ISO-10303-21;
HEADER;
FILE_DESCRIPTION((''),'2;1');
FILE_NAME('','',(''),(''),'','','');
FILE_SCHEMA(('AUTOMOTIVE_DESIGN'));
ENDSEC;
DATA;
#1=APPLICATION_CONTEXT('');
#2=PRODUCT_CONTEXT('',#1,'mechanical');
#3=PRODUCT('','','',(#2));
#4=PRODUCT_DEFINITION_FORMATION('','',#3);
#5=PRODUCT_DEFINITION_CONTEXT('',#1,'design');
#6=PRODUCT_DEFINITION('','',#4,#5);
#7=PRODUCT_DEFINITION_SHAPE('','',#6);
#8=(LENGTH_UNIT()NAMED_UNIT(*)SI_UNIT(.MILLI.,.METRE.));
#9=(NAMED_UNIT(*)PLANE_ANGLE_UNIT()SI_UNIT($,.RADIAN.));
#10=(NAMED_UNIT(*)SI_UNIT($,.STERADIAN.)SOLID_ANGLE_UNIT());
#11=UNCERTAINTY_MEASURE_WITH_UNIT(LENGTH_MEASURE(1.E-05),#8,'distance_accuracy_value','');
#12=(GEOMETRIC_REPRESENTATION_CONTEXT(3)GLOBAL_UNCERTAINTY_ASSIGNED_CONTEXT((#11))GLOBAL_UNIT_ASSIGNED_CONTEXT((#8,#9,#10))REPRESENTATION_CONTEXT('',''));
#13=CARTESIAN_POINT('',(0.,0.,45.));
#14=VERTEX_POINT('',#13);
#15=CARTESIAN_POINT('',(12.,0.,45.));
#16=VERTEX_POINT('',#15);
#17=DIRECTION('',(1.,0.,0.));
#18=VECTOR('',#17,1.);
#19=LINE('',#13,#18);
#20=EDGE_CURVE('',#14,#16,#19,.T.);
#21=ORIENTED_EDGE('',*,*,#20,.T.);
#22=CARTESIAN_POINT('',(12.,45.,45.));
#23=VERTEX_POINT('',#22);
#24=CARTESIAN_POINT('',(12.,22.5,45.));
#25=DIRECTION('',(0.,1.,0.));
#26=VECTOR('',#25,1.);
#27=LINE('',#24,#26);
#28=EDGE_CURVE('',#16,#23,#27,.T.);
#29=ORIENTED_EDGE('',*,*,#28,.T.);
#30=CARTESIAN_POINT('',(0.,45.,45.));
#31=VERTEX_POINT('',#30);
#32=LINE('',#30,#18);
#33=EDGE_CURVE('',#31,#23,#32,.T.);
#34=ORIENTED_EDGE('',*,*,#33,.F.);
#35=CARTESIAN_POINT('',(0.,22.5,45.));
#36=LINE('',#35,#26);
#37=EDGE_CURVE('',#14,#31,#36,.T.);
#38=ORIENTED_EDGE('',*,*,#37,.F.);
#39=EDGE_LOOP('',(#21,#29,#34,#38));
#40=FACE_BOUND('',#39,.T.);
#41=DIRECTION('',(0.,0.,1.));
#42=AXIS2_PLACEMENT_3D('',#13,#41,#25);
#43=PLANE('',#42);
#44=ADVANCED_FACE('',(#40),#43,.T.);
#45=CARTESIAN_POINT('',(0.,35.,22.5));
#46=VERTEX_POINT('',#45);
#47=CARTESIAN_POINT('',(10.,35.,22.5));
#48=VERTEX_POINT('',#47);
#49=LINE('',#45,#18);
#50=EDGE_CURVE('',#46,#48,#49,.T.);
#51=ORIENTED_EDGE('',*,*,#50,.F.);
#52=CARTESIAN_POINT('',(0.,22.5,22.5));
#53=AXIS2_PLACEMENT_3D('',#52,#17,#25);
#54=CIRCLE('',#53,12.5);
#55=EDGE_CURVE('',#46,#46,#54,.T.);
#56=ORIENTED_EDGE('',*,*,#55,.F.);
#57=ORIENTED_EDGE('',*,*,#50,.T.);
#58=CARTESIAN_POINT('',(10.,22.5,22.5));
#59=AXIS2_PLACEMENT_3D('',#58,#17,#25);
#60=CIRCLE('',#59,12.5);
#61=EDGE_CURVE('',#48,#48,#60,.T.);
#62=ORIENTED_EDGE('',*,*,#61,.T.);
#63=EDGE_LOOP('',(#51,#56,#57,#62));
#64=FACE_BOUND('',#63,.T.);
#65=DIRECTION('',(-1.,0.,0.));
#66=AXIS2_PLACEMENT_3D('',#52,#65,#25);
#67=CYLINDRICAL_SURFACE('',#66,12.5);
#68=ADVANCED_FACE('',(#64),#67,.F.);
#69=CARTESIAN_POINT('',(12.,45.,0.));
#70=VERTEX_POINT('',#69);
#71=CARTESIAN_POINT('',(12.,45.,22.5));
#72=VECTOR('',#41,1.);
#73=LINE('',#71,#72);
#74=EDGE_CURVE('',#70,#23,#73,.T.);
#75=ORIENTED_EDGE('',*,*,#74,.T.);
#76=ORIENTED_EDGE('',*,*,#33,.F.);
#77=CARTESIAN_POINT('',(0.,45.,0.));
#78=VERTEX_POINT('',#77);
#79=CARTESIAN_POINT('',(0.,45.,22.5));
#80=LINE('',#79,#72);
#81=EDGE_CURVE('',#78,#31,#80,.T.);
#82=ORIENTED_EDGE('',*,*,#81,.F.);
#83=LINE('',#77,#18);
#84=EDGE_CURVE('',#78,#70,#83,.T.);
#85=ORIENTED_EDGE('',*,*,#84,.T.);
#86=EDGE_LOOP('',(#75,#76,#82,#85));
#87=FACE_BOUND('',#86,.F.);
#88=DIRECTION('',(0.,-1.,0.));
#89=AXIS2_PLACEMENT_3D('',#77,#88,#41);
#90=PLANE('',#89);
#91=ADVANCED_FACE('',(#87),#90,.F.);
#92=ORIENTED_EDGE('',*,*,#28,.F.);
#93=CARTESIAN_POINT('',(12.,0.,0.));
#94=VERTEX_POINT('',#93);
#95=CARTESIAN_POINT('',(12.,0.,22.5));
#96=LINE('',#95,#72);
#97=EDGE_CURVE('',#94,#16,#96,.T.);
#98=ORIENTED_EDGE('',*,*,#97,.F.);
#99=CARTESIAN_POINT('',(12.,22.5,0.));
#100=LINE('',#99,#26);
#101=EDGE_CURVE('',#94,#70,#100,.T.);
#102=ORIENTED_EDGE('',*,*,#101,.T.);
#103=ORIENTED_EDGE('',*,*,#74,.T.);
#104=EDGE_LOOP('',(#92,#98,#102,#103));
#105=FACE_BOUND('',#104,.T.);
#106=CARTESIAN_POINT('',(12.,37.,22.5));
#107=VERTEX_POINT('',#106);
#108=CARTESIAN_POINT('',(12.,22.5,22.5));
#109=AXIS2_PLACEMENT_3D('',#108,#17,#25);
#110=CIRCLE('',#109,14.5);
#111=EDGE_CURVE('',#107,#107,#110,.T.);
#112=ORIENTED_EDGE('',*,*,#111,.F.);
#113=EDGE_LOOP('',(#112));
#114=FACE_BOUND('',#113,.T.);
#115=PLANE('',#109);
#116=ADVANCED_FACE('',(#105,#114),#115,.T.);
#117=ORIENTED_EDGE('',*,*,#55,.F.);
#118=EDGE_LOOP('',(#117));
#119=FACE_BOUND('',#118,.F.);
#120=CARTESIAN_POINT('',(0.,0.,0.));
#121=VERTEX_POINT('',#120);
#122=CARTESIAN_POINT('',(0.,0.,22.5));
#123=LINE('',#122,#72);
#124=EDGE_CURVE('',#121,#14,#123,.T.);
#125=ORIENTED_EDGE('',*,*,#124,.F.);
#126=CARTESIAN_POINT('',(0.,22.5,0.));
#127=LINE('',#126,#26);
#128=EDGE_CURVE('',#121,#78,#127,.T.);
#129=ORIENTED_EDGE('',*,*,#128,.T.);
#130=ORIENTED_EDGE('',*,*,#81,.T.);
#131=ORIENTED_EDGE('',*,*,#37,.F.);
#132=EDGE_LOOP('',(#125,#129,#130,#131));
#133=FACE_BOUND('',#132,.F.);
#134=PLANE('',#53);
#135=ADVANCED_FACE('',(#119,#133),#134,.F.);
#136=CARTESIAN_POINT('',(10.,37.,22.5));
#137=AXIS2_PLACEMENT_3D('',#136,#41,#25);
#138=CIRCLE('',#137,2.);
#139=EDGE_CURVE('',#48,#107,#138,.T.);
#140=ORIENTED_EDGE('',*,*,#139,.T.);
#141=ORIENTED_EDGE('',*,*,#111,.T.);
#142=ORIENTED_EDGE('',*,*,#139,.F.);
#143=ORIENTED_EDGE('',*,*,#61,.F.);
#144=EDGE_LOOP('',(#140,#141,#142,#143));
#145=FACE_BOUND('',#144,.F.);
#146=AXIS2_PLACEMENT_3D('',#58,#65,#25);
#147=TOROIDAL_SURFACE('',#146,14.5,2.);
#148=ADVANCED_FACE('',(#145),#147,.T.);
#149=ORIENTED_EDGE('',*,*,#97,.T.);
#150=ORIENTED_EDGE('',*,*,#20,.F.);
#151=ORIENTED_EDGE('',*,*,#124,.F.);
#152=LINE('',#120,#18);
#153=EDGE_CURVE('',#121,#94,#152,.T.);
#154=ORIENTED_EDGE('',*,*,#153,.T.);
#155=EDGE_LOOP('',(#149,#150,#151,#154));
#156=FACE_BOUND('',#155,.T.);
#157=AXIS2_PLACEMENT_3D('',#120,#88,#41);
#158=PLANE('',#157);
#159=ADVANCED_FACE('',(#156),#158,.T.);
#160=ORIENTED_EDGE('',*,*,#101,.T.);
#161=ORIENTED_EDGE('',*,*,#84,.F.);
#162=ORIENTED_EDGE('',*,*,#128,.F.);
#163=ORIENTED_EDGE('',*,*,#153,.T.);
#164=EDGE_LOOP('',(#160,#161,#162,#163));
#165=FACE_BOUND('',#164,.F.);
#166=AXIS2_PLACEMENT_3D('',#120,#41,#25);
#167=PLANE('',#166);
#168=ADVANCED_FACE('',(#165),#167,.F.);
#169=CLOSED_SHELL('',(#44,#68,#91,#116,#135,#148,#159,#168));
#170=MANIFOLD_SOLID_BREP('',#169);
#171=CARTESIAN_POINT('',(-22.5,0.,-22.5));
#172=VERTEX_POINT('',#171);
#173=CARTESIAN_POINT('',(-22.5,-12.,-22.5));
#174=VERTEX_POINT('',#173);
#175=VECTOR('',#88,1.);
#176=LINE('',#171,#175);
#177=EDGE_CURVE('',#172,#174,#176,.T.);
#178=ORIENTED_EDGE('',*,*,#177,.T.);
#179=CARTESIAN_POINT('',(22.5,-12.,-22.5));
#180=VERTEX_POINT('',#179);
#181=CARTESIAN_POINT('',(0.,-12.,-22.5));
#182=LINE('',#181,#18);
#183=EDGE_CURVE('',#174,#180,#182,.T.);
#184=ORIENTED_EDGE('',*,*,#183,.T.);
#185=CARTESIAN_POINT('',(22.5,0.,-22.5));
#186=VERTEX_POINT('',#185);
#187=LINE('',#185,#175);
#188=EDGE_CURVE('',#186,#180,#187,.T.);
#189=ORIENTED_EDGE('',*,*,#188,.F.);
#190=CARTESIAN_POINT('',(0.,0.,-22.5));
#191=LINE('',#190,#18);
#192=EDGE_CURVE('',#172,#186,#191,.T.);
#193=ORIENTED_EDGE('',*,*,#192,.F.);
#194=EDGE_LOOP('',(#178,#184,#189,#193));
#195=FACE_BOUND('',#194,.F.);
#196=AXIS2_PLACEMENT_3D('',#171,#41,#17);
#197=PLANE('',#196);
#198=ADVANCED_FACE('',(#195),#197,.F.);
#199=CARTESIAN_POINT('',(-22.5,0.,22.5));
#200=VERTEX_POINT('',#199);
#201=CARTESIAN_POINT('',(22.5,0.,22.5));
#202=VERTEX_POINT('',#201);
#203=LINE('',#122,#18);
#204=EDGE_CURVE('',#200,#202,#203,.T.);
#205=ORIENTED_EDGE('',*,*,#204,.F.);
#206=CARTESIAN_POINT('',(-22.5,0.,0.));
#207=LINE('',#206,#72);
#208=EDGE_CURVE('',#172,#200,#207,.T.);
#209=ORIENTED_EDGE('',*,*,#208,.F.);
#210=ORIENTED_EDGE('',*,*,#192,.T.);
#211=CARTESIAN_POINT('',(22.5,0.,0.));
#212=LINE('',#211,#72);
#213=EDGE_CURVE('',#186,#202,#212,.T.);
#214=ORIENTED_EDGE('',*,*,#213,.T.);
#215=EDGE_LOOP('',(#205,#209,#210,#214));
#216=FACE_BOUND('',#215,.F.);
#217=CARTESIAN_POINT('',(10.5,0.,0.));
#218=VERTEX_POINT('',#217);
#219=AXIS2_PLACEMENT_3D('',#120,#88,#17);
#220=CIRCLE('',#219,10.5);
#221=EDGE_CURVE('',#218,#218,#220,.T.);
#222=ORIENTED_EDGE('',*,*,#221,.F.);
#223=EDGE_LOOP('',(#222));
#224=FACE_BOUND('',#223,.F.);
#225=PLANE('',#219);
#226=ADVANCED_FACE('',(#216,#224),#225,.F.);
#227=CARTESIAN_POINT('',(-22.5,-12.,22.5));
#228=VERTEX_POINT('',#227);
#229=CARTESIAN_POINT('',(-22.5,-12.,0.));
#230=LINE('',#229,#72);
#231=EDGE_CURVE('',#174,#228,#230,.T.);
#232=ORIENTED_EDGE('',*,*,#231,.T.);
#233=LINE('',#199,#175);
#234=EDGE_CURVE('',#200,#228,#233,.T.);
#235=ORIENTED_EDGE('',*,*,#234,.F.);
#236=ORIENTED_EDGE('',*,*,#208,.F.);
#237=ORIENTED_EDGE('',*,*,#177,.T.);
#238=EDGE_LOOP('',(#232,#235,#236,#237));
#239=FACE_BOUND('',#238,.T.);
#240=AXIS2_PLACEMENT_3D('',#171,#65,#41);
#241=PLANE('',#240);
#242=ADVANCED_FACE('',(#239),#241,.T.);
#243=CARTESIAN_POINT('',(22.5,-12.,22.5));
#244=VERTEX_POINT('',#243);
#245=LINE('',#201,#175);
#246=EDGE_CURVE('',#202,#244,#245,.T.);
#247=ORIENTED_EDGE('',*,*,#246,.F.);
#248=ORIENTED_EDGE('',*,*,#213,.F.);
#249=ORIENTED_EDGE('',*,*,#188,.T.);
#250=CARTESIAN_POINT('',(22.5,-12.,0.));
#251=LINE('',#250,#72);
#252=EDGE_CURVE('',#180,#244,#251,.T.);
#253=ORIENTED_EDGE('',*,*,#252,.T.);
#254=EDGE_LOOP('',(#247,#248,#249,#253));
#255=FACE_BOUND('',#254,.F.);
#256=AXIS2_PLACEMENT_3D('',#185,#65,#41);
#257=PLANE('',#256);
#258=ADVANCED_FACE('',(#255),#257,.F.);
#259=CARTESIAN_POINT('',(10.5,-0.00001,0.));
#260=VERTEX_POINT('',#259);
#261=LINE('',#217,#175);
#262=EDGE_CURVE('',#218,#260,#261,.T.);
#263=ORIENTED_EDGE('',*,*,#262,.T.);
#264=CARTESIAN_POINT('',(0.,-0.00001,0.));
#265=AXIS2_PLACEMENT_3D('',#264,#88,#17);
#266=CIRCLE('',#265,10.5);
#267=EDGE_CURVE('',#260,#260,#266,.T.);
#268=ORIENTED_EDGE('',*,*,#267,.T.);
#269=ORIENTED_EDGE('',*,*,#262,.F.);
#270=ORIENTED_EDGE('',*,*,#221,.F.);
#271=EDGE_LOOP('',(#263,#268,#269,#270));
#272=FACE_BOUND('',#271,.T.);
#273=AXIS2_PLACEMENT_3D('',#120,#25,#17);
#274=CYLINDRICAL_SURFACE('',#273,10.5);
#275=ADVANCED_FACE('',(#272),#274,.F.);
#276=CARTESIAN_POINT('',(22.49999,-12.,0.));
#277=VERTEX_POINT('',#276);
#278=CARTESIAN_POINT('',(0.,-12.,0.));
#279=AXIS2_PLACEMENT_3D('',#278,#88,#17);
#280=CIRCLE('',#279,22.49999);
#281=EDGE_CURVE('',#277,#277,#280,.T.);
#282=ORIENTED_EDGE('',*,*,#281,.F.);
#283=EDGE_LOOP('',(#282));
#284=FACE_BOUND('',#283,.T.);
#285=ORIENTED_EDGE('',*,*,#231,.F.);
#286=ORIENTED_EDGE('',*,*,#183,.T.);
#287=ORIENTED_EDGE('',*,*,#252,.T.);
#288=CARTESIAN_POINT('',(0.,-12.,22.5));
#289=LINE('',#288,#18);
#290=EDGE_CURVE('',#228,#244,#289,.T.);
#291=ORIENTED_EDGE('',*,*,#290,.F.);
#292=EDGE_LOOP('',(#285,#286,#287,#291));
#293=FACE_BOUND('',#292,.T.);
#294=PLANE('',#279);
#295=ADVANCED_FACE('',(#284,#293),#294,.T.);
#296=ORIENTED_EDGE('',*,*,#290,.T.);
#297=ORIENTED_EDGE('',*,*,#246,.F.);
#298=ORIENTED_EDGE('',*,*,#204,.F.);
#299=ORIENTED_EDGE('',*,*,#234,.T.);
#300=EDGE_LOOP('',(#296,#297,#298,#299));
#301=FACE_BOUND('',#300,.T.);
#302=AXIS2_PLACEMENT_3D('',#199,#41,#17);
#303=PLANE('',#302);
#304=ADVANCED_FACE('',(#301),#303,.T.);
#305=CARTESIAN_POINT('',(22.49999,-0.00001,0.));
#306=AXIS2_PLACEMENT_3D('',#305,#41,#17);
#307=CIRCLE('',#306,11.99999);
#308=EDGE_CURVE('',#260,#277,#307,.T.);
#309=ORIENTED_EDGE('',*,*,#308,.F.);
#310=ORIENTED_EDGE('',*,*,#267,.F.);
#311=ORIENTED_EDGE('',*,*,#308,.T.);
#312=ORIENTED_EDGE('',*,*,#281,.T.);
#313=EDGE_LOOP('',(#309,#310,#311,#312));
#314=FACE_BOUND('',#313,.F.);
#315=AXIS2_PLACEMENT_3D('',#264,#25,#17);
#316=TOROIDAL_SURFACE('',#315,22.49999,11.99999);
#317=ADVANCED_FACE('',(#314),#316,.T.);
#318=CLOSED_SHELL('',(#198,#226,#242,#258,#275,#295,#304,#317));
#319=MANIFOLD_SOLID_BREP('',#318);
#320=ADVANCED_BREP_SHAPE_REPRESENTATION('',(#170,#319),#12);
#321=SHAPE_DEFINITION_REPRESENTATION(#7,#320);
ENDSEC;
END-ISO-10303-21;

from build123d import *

# Parameters (mm, degrees)
F0_W     = 45
F0_H     = 45
F0_R     = 10.5
F1_DEPTH = 12
F2_R     = 11.99999
F3_W     = 45
F3_H     = 45
F3_R     = 12.5
F4_DEPTH = 12
F5_R     = 2


# Not quite as in the source:
# - a fillet or chamfer is up to 0.001 mm smaller than in the source, because OpenCascade refuses the exact size


with BuildPart() as f1:
    # F0 (on Front) → F1 (new body)
    with BuildSketch(Plane.XZ):
        Rectangle(F0_W, F0_H)
        Circle(F0_R, mode=Mode.SUBTRACT)
    extrude(amount=F1_DEPTH)

    # F2 (radius 12 in the source; OpenCascade refuses exactly that, so slightly less here)
    f2_edges = [f1.edges().sort_by_distance(p)[0] for p in [
        (-10.5, -12, 0),
    ]]
    fillet(f2_edges, radius=F2_R)


with BuildPart() as f4:
    # F3 (on Right) → F4 (new body)
    with BuildSketch(Plane.YZ):
        with Locations((22.5, 22.5)):
            Rectangle(F3_W, F3_H)
        with Locations((22.5, 22.5)):
            Circle(F3_R, mode=Mode.SUBTRACT)
    extrude(amount=F4_DEPTH)

    # F5
    f5_edges = [f4.edges().sort_by_distance(p)[0] for p in [
        (12, 10, 22.5),
    ]]
    fillet(f5_edges, radius=F5_R)


solid = Compound([f1.part, f4.part])
